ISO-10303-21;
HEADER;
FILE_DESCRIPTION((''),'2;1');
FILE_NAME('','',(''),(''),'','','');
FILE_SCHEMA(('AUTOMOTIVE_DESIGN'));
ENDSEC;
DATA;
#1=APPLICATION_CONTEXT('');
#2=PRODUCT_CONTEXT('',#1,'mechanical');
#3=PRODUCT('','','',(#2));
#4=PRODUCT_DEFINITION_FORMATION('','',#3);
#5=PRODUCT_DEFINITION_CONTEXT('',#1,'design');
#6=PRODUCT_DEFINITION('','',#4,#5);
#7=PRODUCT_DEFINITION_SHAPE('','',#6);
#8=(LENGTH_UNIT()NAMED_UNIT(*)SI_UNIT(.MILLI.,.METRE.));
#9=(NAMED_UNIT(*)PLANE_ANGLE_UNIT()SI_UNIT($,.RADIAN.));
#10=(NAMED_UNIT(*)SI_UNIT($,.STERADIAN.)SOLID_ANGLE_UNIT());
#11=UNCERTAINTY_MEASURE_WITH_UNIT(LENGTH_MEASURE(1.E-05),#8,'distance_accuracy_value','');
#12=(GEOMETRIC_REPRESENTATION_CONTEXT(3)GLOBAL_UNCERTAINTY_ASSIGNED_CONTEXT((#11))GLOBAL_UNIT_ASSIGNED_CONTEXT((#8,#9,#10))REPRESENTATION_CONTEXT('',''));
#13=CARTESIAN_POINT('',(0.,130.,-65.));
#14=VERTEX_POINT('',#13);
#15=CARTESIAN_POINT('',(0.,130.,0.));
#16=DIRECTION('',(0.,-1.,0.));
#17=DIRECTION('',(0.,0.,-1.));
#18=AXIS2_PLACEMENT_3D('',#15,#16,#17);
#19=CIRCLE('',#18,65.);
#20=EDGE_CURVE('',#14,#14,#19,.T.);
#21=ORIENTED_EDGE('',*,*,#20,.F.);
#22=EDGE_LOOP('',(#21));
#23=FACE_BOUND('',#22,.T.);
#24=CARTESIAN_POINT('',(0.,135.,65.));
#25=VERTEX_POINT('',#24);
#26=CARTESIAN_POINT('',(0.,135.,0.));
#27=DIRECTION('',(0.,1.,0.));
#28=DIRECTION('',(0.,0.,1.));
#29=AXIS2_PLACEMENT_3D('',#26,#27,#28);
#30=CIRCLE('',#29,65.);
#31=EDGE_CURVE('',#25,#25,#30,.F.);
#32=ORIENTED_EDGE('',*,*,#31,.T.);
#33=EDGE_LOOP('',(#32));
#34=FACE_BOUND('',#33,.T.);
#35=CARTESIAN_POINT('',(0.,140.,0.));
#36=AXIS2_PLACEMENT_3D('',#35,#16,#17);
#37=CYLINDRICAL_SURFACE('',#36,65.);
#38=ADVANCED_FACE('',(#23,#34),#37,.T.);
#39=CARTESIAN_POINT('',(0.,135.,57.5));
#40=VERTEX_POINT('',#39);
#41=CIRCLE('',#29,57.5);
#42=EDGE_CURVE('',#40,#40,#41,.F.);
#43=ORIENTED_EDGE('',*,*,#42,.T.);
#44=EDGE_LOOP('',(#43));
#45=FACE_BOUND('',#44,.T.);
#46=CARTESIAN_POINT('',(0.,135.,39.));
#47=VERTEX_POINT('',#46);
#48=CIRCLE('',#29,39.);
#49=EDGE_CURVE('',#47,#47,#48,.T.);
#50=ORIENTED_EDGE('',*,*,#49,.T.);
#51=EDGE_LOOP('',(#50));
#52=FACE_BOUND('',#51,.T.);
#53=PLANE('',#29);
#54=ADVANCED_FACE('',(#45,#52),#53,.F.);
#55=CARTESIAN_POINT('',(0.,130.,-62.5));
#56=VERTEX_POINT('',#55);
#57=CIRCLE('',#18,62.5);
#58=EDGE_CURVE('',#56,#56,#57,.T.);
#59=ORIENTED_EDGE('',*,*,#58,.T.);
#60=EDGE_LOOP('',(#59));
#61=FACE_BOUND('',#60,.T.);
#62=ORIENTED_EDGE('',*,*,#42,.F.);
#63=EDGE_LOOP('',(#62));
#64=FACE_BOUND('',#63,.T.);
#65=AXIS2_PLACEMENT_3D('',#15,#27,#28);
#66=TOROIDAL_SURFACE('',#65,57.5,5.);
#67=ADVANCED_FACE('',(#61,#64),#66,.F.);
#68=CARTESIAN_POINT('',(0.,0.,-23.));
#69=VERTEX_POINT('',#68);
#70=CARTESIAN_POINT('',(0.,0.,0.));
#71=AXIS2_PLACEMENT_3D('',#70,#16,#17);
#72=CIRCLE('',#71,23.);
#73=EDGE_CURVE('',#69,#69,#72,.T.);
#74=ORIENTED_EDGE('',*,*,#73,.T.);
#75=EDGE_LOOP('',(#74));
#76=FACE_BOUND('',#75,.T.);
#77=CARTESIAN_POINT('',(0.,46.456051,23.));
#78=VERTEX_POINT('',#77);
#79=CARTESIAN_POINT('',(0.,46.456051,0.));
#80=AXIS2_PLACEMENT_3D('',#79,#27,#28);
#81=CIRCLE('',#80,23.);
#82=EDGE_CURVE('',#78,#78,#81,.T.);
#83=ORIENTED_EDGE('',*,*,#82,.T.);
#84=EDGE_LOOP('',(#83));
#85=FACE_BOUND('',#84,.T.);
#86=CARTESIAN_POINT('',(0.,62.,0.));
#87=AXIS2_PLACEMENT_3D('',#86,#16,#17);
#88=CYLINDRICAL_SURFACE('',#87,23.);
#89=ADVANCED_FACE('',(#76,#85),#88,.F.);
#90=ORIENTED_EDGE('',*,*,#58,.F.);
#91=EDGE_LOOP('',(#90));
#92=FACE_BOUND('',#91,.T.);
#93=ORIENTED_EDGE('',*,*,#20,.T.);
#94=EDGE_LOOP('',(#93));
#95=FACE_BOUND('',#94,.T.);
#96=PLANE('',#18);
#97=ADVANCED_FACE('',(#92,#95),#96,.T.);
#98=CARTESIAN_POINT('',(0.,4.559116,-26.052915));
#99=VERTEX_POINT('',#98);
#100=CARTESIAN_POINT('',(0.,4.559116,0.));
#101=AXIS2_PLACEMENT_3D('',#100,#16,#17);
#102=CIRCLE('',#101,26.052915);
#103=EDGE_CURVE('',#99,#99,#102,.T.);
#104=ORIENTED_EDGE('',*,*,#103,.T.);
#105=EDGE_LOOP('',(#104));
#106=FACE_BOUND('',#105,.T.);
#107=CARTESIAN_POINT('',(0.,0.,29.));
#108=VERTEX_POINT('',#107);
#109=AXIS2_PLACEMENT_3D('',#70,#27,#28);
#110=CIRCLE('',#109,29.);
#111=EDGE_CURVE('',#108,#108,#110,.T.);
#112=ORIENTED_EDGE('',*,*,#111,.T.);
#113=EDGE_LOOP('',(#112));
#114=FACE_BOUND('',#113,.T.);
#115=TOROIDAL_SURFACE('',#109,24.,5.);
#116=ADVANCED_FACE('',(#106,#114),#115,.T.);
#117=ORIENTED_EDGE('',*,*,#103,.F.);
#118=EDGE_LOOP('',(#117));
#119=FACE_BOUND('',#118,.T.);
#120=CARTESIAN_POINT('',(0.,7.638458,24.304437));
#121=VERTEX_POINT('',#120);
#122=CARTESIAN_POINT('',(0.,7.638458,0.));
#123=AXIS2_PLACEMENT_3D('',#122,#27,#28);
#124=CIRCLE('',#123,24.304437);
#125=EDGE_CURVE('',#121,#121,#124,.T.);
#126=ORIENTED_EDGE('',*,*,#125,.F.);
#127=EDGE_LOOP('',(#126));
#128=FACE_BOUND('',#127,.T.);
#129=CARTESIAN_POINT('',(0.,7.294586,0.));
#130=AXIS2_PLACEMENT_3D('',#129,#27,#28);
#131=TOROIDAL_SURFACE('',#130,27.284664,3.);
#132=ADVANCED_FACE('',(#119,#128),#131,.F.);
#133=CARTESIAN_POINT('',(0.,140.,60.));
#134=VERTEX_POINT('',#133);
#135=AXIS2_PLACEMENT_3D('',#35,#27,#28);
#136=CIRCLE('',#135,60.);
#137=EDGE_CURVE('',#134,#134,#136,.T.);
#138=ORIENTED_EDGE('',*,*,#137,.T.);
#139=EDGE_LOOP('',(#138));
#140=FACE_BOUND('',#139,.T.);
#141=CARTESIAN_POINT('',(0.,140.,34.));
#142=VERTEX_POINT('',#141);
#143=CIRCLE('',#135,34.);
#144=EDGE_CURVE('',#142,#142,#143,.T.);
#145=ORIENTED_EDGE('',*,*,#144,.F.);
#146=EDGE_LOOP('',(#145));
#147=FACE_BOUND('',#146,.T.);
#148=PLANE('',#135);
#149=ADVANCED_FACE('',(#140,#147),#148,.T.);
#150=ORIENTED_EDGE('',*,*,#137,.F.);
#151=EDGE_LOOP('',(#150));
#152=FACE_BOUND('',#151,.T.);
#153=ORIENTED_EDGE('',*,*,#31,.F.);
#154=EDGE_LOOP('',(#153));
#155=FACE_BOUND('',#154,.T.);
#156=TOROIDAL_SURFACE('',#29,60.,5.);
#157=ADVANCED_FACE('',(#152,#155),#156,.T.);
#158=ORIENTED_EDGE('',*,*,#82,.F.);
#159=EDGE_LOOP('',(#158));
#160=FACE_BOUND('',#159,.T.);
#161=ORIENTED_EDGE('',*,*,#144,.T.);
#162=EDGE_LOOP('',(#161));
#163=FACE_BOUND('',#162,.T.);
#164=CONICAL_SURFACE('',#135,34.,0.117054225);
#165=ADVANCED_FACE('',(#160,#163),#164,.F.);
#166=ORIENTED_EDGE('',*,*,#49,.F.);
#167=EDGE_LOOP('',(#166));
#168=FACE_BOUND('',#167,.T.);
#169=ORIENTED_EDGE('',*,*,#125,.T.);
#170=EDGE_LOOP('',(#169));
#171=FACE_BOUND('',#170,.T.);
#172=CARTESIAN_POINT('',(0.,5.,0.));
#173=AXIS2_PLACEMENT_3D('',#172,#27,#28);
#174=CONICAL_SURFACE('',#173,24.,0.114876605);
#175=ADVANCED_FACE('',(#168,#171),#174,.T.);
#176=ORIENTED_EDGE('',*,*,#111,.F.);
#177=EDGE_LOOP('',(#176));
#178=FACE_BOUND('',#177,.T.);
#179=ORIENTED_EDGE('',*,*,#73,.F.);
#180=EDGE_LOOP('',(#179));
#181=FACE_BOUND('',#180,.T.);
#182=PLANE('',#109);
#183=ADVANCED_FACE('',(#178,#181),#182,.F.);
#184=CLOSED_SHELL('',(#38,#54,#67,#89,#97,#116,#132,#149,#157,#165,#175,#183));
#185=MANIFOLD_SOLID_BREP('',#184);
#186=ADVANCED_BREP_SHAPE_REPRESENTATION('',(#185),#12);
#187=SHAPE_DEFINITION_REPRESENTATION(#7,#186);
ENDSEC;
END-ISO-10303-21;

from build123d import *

# Parameters (mm, degrees)
CROQUIS1_R              = 29
SALIENTE_EXTRUIR1_DEPTH = 5
CROQUIS2_R              = 24
CROQUIS3_R              = 39
CROQUIS4_R              = 65
SALIENTE_EXTRUIR2_DEPTH = 5
SALIENTE_EXTRUIR3_START = 5
CROQUIS5_R              = 65
CROQUIS5_R_2            = 62.5
SALIENTE_EXTRUIR3_DEPTH = 5
REDONDEO1_R             = 5
CROQUIS6_R              = 23
CORTAR_EXTRUIR1_DEPTH   = 62
REDONDEO2_R             = 3


with BuildPart() as part:
    # Croquis1 → Saliente-Extruir1 (new body)
    with BuildSketch(Plane(origin=(0, 0, 0), x_dir=(1, 0, 0), z_dir=(0, 1, 0))):
        with Locations(Location((0, 0, 0), (0, 0, 270))):
            Circle(CROQUIS1_R)
    extrude(amount=SALIENTE_EXTRUIR1_DEPTH)

    # Croquis2 → Recubrir1 section 0
    with BuildSketch(Plane(origin=(0, 5, 0), x_dir=(1, 0, 0), z_dir=(0, 1, 0))):
        Circle(CROQUIS2_R)
    # Croquis3 → Recubrir1 section 1
    with BuildSketch(Plane(origin=(0, 135, 0), x_dir=(1, 0, 0), z_dir=(0, 1, 0))):
        Circle(CROQUIS3_R)
    loft()

    # Croquis4 → Saliente-Extruir2 (add)
    with BuildSketch(Plane(origin=(0, 135, 0), x_dir=(1, 0, 0), z_dir=(0, 1, 0))):
        with Locations(Location((0, 0, 0), (0, 0, 270))):
            Circle(CROQUIS4_R)
    extrude(amount=SALIENTE_EXTRUIR2_DEPTH)

    # Croquis5 → Saliente-Extruir3 (add)
    with BuildSketch(Plane.XZ.offset(-135).offset(SALIENTE_EXTRUIR3_START)):
        with Locations(Location((0, 0, 0), (0, 0, 270))):
            Circle(CROQUIS5_R)
        with Locations(Location((0, 0, 0), (0, 0, 270))):
            Circle(CROQUIS5_R_2, mode=Mode.SUBTRACT)
    extrude(amount=-SALIENTE_EXTRUIR3_DEPTH)

    # Redondeo1
    redondeo1_edges = [part.edges().sort_by_distance(p)[0] for p in [
        (0, 140, -65),
        (0, 135, 62.5),
        (0, 5, -29),
    ]]
    fillet(redondeo1_edges, radius=REDONDEO1_R - 0.0001)  # a hair under: the kernel refuses the full size

    # Croquis6 → Cortar-Extruir1 (cut)
    with BuildSketch(Plane.XZ):
        with Locations(Location((0, 0, 0), (0, 0, 270))):
            Circle(CROQUIS6_R)
    extrude(amount=-CORTAR_EXTRUIR1_DEPTH, mode=Mode.SUBTRACT)

    # Croquis7 → Cortar-Revolución1 (revolve, cut)
    with BuildSketch(Plane.XY, mode=Mode.PRIVATE) as cortar_revoluci_n1_sk:
        Polygon((22, 37.952055194), (0, 37.952055194), (0, 140), (34, 140), align=None)
    revolve(cortar_revoluci_n1_sk.sketch.rotate(Axis((0, 192.821641375, 0), (0, -1, 0)), 90), axis=Axis((0, 192.821641375, 0), (0, -1, 0)), mode=Mode.SUBTRACT)

    # Redondeo2
    redondeo2_edges = [part.edges().sort_by_distance(p)[0] for p in [
        (-24, 5, 0),
    ]]
    fillet(redondeo2_edges, radius=REDONDEO2_R)


solid = part.part
